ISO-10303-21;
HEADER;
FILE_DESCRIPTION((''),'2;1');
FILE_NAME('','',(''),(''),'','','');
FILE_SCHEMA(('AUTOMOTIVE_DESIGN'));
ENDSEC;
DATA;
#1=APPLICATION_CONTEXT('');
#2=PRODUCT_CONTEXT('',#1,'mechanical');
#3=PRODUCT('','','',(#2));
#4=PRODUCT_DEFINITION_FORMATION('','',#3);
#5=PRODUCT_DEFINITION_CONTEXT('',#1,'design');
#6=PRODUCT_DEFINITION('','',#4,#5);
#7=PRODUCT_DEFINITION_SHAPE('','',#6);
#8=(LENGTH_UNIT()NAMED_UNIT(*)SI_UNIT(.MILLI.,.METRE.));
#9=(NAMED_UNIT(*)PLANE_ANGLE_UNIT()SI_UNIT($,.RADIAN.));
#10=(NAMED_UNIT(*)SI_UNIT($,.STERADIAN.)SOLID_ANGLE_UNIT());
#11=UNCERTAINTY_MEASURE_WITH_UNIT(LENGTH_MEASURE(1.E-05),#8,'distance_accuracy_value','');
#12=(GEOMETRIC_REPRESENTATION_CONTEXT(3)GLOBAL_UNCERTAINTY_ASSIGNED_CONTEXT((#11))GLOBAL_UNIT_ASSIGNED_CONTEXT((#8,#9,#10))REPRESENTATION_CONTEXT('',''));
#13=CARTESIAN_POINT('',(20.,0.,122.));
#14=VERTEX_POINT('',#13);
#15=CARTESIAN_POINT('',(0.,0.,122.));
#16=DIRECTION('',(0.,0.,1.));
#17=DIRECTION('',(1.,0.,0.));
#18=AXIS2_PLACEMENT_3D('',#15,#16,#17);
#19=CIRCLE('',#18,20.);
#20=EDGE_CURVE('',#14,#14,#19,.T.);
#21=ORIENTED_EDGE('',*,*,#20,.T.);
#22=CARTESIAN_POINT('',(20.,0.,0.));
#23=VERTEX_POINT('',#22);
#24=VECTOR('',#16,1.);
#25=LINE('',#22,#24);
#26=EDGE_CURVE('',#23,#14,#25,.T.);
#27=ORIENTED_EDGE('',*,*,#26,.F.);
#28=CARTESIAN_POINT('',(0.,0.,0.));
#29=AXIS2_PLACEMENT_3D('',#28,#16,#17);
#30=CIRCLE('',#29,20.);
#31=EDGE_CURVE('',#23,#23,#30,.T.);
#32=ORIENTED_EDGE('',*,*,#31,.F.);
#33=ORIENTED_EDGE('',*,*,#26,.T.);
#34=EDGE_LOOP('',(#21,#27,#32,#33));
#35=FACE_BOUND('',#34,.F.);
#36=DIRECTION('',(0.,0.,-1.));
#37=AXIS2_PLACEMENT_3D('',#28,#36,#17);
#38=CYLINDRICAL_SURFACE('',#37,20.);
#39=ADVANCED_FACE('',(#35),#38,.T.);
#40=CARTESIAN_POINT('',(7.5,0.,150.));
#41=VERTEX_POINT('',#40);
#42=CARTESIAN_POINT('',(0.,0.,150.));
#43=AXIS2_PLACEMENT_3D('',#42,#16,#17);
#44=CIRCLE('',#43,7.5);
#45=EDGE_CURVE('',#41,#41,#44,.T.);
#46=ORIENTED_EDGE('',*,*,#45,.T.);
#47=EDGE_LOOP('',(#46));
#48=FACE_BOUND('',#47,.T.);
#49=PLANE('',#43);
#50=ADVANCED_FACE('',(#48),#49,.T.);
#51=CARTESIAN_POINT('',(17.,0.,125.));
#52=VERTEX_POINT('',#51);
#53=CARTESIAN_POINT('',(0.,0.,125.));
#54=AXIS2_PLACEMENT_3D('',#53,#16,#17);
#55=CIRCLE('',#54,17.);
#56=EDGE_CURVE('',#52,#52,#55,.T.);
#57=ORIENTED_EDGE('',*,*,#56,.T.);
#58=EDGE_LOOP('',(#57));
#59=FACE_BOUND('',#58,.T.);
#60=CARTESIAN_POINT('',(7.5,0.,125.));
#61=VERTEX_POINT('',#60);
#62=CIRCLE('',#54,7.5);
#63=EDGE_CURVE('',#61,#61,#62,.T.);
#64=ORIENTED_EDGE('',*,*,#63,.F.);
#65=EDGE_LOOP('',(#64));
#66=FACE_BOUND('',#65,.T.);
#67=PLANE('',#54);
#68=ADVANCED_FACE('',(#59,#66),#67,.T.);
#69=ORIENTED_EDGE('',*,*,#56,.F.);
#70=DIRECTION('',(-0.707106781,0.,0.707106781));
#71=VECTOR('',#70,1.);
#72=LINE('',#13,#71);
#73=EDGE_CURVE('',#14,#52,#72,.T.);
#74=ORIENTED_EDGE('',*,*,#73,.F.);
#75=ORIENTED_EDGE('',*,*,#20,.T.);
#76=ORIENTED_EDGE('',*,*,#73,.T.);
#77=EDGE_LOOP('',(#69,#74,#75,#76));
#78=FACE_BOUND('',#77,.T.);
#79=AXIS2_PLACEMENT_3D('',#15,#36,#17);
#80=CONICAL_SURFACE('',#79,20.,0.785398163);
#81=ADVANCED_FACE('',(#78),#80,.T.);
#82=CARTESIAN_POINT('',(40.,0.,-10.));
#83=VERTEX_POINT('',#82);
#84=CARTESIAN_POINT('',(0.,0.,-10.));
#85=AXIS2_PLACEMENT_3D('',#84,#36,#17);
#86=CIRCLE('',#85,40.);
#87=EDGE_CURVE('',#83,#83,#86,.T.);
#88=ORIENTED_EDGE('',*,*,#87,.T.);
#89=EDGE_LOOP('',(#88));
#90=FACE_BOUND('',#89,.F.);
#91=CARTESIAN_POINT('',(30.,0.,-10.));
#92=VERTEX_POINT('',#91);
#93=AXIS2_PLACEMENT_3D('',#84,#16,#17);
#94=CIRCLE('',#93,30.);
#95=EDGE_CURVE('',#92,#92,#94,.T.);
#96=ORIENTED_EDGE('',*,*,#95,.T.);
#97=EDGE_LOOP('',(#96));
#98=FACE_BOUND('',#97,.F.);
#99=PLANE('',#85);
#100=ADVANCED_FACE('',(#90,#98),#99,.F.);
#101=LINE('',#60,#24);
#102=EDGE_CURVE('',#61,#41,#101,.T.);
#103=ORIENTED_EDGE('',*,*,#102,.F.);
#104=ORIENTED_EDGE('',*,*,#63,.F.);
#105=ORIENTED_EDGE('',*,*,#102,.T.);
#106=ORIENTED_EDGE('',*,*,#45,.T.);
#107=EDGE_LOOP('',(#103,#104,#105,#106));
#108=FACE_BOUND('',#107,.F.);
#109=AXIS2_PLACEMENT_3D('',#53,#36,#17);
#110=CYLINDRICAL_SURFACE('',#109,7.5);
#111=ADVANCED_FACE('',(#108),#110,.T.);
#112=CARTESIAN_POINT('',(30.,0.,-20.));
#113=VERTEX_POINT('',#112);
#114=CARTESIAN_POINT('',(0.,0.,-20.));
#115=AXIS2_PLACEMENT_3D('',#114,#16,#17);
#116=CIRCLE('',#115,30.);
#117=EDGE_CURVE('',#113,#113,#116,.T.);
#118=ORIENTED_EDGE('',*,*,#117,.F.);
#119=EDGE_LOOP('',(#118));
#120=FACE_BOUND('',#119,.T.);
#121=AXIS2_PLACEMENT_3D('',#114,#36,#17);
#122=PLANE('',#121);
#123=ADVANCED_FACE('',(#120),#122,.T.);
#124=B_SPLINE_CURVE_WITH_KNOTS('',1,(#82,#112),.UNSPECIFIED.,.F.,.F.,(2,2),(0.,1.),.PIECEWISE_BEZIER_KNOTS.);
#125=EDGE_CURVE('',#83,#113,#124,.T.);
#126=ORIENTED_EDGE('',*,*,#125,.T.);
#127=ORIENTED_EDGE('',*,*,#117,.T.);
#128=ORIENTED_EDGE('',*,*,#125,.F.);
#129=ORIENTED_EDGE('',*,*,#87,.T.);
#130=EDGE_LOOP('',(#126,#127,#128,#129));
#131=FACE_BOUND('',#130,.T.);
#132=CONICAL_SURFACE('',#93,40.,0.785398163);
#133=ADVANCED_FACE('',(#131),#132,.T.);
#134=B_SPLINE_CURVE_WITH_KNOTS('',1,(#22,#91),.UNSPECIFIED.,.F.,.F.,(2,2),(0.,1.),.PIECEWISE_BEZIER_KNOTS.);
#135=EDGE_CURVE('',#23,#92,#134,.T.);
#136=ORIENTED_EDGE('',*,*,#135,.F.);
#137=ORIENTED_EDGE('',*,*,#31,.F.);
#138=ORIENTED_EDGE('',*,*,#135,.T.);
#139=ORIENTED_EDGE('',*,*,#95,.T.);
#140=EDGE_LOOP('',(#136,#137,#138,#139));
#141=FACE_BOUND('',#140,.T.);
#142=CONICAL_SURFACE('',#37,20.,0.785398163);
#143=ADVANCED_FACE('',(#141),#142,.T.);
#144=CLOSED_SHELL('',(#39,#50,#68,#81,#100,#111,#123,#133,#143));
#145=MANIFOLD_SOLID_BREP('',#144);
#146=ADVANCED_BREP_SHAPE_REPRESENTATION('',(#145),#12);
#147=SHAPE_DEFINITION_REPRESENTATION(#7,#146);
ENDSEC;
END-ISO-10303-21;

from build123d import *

# Parameters (mm, degrees)
F0_R     = 20
F1_DEPTH = 125
F2_R     = 7.5
F3_DEPTH = 25
F4_R     = 20
F5_DEPTH = 10
F5_TAPER = -45
F6_R     = 40
F6_R_2   = 30
F7_DEPTH = 10
F7_TAPER = 45
F8_SIZE2 = 3
F8_SIZE  = 3


with BuildPart() as f1:
    # F0 (on Top) → F1 (new body)
    with BuildSketch(Plane.XY):
        Circle(F0_R)
    extrude(amount=F1_DEPTH)

    # F2 (on face) → F3 (join)
    with BuildSketch(Plane.XY.offset(125)):
        Circle(F2_R)
    extrude(amount=F3_DEPTH)

    # F4 (on face) → F5 (join)
    with BuildSketch(Plane(origin=(0, 0, 0), x_dir=(1, 0, 0), z_dir=(0, 0, -1))):
        Circle(F4_R)
    extrude(amount=F5_DEPTH, taper=F5_TAPER)

    # F6 (on face) → F7 (join)
    with BuildSketch(Plane(origin=(0, 0, -10), x_dir=(1, 0, 0), z_dir=(0, 0, -1))):
        Circle(F6_R)
        Circle(F6_R_2, mode=Mode.SUBTRACT)
        Circle(F6_R_2)
    extrude(amount=F7_DEPTH, taper=F7_TAPER)

    # F8
    f8_edges = [f1.edges().sort_by_distance(p)[0] for p in [
        (-20, 0, 125),
    ]]
    chamfer(f8_edges, length=F8_SIZE, length2=F8_SIZE2)


solid = f1.part
